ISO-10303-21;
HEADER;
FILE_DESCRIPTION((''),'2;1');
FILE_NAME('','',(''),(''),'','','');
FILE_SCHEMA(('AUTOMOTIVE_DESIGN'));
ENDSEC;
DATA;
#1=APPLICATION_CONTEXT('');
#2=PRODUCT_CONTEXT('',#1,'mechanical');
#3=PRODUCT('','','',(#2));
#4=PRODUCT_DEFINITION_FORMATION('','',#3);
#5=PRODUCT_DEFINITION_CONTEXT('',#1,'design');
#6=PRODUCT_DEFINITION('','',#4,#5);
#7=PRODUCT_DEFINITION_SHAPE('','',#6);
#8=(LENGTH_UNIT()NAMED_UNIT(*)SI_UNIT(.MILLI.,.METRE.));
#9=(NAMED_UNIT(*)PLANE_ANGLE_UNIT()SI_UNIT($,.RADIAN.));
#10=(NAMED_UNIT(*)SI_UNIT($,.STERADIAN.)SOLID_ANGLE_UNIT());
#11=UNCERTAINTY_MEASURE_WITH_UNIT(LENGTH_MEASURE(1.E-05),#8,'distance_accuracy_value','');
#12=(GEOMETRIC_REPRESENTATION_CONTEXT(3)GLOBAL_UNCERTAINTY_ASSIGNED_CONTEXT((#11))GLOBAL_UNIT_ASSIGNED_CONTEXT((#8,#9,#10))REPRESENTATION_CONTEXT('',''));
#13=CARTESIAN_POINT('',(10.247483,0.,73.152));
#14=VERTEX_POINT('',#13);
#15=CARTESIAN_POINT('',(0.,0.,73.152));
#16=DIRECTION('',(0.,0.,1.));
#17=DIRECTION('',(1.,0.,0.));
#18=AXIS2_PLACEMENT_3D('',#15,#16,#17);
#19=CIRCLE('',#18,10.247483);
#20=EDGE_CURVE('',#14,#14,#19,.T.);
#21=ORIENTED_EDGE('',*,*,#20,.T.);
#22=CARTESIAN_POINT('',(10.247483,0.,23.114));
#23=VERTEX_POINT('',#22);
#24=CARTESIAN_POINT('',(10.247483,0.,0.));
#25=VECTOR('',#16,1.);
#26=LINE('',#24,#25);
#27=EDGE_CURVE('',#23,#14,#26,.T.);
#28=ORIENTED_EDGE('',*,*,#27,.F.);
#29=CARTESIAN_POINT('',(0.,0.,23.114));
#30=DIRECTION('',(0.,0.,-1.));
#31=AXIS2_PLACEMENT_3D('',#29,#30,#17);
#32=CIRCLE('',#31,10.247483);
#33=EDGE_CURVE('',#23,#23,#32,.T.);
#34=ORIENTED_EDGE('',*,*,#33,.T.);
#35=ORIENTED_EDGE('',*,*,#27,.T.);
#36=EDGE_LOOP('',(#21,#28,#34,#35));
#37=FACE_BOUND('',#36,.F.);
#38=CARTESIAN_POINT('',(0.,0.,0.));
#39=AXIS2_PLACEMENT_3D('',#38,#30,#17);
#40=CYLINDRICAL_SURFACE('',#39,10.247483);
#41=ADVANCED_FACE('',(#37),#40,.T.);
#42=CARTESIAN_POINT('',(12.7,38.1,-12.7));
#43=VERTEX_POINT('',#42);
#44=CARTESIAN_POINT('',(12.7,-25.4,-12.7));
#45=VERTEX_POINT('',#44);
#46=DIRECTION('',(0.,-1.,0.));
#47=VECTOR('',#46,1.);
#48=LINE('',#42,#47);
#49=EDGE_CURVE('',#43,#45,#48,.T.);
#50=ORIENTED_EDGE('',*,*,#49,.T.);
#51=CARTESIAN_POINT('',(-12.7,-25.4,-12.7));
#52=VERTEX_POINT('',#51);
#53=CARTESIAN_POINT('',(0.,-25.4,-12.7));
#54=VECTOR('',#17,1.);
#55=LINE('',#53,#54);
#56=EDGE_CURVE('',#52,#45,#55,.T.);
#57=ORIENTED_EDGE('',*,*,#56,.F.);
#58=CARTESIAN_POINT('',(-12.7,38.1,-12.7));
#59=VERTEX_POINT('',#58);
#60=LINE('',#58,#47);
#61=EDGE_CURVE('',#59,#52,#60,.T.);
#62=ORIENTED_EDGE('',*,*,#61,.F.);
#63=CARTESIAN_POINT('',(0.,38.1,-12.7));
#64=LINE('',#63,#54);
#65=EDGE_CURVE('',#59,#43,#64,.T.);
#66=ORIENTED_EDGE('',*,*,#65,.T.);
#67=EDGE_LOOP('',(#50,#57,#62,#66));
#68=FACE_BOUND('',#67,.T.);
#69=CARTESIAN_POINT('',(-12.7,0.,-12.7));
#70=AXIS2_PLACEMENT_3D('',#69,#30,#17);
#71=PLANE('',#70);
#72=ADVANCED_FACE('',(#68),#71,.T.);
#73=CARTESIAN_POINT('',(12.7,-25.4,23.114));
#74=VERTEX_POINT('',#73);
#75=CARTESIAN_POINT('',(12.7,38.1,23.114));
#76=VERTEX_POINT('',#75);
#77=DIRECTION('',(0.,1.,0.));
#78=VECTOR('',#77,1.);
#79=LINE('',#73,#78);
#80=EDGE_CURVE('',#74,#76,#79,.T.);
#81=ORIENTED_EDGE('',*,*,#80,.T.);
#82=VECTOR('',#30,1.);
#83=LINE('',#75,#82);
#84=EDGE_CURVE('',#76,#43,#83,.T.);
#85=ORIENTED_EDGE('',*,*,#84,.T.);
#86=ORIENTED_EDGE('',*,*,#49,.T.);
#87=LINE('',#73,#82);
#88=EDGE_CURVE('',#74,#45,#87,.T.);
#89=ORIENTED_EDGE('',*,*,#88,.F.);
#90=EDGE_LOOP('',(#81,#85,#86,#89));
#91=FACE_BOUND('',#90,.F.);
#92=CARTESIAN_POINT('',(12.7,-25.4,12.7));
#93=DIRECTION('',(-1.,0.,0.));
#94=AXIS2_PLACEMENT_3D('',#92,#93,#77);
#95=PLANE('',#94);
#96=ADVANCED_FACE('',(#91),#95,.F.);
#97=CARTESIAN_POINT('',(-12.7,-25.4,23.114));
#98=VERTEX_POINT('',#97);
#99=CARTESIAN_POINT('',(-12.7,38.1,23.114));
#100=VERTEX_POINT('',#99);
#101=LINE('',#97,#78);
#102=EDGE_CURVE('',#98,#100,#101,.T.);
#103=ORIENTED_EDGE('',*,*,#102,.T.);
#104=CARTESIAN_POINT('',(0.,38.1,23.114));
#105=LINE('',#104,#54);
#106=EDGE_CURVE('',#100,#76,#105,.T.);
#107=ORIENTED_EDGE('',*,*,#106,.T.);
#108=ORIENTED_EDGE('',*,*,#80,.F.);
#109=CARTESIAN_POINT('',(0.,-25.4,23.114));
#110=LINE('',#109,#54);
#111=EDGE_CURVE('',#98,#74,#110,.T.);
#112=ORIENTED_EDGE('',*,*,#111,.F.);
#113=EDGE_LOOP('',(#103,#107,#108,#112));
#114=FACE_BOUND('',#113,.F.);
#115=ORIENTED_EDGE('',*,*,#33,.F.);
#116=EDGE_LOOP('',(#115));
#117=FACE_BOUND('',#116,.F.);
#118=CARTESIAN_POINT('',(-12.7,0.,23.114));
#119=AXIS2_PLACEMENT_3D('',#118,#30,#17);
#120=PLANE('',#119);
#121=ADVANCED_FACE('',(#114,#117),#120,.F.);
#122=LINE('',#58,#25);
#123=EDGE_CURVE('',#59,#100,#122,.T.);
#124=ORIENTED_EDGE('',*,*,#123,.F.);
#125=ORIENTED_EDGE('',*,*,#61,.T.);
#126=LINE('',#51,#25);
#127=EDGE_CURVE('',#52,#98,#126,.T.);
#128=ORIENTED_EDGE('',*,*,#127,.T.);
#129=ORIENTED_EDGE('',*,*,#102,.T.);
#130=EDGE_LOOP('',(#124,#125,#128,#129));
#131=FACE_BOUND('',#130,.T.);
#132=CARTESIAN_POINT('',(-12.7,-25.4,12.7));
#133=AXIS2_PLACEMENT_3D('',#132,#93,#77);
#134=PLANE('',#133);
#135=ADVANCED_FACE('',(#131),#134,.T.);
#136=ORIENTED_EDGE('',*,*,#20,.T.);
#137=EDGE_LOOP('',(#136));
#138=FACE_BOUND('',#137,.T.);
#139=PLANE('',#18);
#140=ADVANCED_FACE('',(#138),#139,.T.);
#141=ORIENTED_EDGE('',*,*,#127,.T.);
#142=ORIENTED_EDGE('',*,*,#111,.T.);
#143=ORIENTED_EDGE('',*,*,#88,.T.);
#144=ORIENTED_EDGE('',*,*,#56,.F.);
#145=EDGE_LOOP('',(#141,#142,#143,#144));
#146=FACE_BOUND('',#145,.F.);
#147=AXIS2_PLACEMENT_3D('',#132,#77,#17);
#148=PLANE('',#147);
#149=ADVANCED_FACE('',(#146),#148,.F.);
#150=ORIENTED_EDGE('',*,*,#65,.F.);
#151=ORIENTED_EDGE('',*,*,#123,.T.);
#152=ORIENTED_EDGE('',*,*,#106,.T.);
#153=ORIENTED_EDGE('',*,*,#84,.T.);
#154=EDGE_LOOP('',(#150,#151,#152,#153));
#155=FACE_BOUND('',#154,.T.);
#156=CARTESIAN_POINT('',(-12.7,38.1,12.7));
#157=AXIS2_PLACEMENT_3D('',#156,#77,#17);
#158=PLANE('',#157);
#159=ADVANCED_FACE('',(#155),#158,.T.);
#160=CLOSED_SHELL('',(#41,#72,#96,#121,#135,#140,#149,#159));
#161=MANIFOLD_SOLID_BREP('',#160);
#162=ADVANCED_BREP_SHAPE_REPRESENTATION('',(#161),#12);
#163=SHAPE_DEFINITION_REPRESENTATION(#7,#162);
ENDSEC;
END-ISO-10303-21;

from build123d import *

# Parameters (mm, degrees)
F0_W     = 25.4
F0_H     = 25.4
F1_DEPTH = 25.4
F2_DEPTH = 38.1
F3_DEPTH = 10.414
F4_R     = 10.2474826173
F5_DEPTH = 73.152


# Not quite as in the source:
# - the program builds the solid bodies; features that only make, move or delete a surface that nothing else refers to are left out


with BuildPart() as f1:
    # F0 (on Front) → F1 (new body)
    with BuildSketch(Plane.XZ):
        Rectangle(F0_W, F0_H)
    extrude(amount=F1_DEPTH)

    # F2 (add): a face of the model
    f2_faces = [f1.faces().sort_by_distance(p)[0] for p in [
        (0, 0, 0),
    ]]
    extrude(f2_faces, amount=F2_DEPTH)

    # F3 (add): a face of the model
    f3_faces = [f1.faces().sort_by_distance(p)[0] for p in [
        (0, 6.35, 12.7),
    ]]
    extrude(f3_faces, amount=F3_DEPTH)

    # F4 (on Top) → F5 (join)
    with BuildSketch(Plane.XY):
        Circle(F4_R)
    extrude(amount=F5_DEPTH)


solid = f1.part
